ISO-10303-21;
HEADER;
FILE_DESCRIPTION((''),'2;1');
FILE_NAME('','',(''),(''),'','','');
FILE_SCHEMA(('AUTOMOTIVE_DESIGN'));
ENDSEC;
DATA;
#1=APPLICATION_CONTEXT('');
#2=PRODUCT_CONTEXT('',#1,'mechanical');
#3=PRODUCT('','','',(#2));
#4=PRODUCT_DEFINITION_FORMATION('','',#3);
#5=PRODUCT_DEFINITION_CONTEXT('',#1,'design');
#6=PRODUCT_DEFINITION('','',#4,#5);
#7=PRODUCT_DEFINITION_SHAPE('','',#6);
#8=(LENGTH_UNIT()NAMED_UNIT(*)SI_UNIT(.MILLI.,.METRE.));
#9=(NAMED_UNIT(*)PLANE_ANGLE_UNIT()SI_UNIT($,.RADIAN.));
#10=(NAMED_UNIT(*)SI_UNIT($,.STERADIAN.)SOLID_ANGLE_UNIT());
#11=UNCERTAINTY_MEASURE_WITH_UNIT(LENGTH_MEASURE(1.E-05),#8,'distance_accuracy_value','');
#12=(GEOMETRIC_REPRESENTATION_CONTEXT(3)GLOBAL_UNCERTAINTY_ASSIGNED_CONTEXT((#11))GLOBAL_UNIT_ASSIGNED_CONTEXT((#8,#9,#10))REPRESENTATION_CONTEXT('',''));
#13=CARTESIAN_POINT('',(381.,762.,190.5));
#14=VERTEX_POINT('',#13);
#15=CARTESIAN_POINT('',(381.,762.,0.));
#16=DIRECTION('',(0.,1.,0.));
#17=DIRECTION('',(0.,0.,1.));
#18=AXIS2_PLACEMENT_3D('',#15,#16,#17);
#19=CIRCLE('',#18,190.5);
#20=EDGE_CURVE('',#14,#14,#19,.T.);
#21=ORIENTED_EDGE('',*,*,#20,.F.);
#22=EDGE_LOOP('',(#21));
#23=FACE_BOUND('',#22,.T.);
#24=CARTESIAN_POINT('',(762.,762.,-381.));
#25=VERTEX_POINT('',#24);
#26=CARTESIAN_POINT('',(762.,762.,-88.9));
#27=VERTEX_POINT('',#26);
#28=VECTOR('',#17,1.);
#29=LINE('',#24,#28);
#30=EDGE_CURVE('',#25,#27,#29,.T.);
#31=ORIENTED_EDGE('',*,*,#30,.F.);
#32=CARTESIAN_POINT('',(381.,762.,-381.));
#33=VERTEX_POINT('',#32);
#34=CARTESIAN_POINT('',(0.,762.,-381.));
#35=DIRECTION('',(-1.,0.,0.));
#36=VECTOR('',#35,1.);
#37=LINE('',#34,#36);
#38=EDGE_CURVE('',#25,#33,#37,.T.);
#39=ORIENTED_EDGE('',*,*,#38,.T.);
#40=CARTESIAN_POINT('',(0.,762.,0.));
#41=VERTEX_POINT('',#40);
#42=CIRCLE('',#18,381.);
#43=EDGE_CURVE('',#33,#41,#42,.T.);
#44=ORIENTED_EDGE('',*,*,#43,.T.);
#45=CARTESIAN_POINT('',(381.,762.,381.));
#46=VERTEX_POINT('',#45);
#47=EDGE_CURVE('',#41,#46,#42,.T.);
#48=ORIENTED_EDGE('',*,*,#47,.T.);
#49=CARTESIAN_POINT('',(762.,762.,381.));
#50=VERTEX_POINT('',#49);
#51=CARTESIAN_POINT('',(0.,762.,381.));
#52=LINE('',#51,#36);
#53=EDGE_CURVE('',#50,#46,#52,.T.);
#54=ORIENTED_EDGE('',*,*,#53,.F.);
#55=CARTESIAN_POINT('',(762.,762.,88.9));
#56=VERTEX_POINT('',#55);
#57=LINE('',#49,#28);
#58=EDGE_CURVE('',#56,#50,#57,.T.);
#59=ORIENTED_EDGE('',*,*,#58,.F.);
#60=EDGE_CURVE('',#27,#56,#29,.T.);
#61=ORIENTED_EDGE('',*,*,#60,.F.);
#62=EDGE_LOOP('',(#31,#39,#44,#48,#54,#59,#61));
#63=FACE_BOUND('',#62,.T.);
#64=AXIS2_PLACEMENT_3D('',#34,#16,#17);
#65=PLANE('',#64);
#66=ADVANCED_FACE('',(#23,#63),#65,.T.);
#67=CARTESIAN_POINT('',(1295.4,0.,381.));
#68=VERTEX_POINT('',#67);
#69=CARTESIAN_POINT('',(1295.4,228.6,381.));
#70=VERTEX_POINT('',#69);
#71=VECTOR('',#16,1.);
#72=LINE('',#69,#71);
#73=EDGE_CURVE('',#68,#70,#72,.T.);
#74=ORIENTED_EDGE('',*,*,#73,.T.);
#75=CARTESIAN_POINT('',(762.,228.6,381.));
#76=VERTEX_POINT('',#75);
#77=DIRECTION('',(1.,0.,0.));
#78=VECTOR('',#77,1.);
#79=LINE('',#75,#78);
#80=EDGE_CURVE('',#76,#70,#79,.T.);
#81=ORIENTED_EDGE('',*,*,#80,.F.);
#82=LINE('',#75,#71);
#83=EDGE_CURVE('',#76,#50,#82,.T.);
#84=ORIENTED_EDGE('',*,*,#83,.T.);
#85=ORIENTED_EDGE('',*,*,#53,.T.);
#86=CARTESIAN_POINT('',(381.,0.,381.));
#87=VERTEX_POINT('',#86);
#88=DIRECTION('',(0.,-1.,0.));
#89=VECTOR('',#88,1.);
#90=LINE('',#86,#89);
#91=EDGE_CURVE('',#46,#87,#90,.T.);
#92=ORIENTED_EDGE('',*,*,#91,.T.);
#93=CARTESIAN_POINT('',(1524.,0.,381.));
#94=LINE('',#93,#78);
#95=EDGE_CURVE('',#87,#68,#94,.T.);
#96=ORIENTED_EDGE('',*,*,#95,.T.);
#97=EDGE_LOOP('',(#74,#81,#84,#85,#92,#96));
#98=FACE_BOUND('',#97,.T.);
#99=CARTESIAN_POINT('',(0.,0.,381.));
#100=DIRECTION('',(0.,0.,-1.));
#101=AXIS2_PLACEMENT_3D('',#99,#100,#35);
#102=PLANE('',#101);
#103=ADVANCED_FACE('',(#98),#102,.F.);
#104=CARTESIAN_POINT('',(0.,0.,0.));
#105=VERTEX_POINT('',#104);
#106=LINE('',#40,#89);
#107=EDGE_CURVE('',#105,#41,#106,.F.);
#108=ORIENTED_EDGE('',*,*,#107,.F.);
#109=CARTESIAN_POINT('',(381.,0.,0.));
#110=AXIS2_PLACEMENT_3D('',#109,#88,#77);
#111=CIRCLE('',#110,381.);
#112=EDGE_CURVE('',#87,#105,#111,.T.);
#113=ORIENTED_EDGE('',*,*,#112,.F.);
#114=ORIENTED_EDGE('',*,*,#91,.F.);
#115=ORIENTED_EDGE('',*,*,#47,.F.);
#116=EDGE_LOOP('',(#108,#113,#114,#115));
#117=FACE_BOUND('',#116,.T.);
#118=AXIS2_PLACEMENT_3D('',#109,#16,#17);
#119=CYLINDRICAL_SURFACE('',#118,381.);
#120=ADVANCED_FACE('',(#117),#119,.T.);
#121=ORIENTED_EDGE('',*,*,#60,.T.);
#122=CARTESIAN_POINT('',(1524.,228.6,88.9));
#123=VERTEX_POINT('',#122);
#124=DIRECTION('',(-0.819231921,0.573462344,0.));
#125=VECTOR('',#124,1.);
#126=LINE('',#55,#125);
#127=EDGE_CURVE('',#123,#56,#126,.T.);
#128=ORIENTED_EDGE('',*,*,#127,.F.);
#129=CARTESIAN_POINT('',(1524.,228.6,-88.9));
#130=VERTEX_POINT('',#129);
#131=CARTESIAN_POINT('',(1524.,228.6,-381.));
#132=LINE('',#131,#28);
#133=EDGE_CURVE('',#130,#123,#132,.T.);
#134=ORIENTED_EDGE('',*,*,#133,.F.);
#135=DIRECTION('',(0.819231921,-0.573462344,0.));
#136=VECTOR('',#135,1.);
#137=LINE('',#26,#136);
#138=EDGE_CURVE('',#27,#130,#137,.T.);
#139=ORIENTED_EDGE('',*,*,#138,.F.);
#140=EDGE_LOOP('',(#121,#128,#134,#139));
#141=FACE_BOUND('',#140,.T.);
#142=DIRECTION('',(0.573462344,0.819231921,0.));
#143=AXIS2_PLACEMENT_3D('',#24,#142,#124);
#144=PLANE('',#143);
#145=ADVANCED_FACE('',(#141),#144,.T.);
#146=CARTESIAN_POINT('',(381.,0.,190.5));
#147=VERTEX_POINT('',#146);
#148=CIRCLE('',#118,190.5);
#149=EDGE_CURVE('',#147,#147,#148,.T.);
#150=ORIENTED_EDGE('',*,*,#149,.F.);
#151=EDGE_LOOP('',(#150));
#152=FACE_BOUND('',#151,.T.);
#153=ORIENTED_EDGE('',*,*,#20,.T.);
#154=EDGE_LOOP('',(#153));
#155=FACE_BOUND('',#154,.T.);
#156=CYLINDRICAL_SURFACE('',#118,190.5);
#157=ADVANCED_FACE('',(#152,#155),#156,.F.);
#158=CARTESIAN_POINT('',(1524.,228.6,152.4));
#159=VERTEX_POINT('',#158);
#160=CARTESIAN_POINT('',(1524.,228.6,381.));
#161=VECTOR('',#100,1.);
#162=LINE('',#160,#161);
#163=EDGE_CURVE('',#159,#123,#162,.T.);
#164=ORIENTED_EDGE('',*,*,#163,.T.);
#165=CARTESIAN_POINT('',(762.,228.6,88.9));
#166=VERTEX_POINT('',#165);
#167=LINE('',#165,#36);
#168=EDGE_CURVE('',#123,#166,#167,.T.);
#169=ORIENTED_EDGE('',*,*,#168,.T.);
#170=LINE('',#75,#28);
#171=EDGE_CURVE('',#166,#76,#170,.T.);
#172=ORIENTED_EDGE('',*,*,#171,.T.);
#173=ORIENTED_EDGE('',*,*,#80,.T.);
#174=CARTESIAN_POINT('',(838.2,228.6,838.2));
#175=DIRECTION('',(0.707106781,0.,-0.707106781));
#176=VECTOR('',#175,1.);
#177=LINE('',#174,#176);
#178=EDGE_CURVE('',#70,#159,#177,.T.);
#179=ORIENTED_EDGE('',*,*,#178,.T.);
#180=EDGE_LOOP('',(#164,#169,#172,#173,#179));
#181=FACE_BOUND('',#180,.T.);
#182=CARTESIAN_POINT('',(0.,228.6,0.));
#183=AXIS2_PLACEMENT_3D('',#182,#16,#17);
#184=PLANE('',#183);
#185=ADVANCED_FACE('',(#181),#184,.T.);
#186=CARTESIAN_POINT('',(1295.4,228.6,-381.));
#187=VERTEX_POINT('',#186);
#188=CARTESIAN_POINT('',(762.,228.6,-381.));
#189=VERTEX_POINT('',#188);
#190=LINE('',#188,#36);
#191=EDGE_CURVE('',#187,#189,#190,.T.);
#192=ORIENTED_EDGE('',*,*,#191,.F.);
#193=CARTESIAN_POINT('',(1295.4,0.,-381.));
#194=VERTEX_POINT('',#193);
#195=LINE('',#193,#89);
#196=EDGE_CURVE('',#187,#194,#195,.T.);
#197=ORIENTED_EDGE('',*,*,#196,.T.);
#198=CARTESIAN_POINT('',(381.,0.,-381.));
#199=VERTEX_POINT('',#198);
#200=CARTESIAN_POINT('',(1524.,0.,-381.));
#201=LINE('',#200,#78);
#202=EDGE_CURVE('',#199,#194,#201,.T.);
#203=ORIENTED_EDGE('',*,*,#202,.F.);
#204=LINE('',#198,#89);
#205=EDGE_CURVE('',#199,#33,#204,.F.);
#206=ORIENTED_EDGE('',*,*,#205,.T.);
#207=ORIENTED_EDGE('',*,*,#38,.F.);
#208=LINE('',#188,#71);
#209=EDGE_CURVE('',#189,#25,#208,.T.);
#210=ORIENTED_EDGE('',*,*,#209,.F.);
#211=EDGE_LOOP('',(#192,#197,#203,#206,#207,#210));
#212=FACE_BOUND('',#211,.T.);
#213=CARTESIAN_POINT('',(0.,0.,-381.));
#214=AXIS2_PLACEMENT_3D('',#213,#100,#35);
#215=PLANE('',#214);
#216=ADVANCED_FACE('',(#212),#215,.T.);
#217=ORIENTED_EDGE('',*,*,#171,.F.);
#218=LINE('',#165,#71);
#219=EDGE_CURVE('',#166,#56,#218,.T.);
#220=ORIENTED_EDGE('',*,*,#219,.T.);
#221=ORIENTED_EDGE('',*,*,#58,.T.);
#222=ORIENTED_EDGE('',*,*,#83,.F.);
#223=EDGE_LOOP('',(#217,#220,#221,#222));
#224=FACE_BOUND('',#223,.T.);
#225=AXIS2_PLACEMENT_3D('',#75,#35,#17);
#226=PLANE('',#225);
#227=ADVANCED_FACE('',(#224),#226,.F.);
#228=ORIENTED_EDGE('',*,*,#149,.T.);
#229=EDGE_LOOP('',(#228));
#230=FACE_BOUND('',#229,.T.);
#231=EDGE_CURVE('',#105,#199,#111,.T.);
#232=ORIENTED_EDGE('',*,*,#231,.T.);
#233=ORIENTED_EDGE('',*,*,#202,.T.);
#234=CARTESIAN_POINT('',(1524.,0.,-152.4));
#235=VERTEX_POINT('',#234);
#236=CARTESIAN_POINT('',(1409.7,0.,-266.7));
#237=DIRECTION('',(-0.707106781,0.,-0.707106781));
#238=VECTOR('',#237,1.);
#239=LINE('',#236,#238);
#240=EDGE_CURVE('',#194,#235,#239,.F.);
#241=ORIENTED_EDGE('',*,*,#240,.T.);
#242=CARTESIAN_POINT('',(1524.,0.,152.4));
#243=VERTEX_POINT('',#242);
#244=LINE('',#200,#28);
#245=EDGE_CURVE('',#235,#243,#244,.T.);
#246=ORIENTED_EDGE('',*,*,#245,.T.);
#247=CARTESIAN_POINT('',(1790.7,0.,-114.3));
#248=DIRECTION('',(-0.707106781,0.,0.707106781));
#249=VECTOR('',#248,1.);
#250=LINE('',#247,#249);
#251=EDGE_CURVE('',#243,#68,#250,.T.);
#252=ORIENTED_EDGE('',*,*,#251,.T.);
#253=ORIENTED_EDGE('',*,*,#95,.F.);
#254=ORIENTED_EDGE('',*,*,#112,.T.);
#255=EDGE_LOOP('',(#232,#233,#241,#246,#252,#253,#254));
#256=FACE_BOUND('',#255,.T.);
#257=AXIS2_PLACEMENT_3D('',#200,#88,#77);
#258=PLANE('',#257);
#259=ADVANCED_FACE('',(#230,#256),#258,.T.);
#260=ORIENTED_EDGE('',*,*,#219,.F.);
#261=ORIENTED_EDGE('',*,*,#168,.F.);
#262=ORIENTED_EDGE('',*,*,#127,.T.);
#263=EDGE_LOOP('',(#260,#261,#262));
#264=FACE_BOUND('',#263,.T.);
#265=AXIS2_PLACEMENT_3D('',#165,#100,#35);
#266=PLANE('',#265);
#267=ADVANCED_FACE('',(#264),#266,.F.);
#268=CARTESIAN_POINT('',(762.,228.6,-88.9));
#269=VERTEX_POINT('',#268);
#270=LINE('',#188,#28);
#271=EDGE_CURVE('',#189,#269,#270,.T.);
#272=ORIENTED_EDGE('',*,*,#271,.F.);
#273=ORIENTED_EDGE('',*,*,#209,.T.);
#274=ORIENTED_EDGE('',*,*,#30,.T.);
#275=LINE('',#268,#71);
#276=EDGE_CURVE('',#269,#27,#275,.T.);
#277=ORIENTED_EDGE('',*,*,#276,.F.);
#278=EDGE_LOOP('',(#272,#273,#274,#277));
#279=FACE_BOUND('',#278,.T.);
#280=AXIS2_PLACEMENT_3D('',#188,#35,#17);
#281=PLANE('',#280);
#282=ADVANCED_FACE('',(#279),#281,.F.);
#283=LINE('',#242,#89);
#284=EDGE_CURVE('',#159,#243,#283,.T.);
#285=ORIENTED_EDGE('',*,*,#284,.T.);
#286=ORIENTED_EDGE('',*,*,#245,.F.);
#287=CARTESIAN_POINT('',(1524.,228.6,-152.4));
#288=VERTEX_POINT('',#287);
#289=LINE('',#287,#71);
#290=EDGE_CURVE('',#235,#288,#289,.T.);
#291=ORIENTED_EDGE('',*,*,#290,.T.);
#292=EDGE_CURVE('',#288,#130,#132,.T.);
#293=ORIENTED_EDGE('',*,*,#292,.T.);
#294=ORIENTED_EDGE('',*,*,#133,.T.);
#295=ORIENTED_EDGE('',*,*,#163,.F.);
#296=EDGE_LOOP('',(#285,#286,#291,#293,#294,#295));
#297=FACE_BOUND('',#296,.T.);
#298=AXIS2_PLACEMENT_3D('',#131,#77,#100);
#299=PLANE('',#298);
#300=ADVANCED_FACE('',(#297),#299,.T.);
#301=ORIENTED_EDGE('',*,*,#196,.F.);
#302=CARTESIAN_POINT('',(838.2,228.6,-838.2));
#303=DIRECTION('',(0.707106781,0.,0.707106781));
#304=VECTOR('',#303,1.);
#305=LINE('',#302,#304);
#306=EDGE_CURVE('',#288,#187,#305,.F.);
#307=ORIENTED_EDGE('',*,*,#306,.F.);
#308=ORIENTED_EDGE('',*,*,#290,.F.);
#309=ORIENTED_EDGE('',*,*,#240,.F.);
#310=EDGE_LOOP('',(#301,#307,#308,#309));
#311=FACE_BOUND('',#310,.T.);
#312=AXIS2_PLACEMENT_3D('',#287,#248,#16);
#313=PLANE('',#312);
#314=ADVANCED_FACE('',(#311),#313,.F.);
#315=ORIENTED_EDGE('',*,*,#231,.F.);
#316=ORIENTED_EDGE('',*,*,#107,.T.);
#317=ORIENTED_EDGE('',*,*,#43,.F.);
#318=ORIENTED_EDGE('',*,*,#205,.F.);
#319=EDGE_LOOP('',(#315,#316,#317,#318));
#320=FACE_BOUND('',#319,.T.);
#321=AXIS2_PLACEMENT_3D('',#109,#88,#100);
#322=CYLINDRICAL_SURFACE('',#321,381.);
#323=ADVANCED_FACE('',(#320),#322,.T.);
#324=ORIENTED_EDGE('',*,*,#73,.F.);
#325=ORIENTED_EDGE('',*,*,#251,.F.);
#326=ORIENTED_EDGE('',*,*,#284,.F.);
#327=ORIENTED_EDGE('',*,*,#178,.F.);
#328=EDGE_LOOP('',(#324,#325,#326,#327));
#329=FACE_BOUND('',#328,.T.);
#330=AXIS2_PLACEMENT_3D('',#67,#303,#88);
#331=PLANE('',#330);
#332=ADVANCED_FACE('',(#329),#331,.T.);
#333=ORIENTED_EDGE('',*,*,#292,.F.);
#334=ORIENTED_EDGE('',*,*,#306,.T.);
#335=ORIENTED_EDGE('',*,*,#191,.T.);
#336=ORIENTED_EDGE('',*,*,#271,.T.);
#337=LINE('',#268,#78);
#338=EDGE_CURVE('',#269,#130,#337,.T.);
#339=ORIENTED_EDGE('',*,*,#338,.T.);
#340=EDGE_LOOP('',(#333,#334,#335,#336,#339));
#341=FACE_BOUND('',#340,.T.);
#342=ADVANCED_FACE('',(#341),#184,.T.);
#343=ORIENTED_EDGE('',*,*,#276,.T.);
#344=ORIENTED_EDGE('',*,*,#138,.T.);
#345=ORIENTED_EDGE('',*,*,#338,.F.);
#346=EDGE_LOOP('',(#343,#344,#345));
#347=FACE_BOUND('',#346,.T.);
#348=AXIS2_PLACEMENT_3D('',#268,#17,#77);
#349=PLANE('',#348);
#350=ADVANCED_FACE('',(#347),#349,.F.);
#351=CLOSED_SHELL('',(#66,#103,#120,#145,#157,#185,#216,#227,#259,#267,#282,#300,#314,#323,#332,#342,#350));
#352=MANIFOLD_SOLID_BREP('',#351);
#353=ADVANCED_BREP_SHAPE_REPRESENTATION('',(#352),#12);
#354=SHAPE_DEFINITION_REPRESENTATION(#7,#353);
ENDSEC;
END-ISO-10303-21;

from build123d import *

# Parameters (mm, degrees)
BOSS_EXTRUDE2_DEPTH      = 381
BOSS_EXTRUDE2_DEPTH_BACK = 381
FILLET1_R                = 381
SKETCH2_W                = 762
SKETCH2_H                = 292.1
CUT_EXTRUDE1_DEPTH       = 533.4
SKETCH4_R                = 190.5
CUT_EXTRUDE2_DEPTH       = 1746.961339778
CHAMFER1_SIZE            = 228.6


with BuildPart() as part:
    # Sketch1 → Boss-Extrude2 (new, two sides: drawn at the far end of the back side and taken through both)
    with BuildSketch(Plane.XY.offset(-BOSS_EXTRUDE2_DEPTH_BACK)):
        Polygon((0, 0), (0, 762), (762, 762), (1524, 228.6), (1524, 0), align=None)
    extrude(amount=BOSS_EXTRUDE2_DEPTH + BOSS_EXTRUDE2_DEPTH_BACK)

    # Fillet1
    fillet1_edges = [part.edges().sort_by_distance(p)[0] for p in [
        (0, 381, -381),
        (0, 381, 381),
    ]]
    fillet(fillet1_edges, radius=FILLET1_R - 0.0001)  # a hair under: the kernel refuses the full size

    # Sketch2 → Cut-Extrude1 (cut)
    with BuildSketch(Plane(origin=(0, 762, 0), x_dir=(1, 0, 0), z_dir=(0, 1, 0))):
        with Locations((1143, 234.95)):
            Rectangle(SKETCH2_W, SKETCH2_H)
        with Locations((1143, -234.95)):
            Rectangle(SKETCH2_W, SKETCH2_H)
    extrude(amount=-CUT_EXTRUDE1_DEPTH, mode=Mode.SUBTRACT)

    # Sketch4 → Cut-Extrude2 (cut, through all)
    with BuildSketch(Plane(origin=(0, 762, 0), x_dir=(1, 0, 0), z_dir=(0, 1, 0))):
        with Locations(Location((381, 0, 0), (0, 0, 270))):
            Circle(SKETCH4_R)
    extrude(amount=-CUT_EXTRUDE2_DEPTH, mode=Mode.SUBTRACT)

    # Chamfer1
    chamfer1_edges = [part.edges().sort_by_distance(p)[0] for p in [
        (1524, 114.3, 381),
        (1524, 114.3, -381),
    ]]
    chamfer(chamfer1_edges, length=CHAMFER1_SIZE)


solid = part.part
